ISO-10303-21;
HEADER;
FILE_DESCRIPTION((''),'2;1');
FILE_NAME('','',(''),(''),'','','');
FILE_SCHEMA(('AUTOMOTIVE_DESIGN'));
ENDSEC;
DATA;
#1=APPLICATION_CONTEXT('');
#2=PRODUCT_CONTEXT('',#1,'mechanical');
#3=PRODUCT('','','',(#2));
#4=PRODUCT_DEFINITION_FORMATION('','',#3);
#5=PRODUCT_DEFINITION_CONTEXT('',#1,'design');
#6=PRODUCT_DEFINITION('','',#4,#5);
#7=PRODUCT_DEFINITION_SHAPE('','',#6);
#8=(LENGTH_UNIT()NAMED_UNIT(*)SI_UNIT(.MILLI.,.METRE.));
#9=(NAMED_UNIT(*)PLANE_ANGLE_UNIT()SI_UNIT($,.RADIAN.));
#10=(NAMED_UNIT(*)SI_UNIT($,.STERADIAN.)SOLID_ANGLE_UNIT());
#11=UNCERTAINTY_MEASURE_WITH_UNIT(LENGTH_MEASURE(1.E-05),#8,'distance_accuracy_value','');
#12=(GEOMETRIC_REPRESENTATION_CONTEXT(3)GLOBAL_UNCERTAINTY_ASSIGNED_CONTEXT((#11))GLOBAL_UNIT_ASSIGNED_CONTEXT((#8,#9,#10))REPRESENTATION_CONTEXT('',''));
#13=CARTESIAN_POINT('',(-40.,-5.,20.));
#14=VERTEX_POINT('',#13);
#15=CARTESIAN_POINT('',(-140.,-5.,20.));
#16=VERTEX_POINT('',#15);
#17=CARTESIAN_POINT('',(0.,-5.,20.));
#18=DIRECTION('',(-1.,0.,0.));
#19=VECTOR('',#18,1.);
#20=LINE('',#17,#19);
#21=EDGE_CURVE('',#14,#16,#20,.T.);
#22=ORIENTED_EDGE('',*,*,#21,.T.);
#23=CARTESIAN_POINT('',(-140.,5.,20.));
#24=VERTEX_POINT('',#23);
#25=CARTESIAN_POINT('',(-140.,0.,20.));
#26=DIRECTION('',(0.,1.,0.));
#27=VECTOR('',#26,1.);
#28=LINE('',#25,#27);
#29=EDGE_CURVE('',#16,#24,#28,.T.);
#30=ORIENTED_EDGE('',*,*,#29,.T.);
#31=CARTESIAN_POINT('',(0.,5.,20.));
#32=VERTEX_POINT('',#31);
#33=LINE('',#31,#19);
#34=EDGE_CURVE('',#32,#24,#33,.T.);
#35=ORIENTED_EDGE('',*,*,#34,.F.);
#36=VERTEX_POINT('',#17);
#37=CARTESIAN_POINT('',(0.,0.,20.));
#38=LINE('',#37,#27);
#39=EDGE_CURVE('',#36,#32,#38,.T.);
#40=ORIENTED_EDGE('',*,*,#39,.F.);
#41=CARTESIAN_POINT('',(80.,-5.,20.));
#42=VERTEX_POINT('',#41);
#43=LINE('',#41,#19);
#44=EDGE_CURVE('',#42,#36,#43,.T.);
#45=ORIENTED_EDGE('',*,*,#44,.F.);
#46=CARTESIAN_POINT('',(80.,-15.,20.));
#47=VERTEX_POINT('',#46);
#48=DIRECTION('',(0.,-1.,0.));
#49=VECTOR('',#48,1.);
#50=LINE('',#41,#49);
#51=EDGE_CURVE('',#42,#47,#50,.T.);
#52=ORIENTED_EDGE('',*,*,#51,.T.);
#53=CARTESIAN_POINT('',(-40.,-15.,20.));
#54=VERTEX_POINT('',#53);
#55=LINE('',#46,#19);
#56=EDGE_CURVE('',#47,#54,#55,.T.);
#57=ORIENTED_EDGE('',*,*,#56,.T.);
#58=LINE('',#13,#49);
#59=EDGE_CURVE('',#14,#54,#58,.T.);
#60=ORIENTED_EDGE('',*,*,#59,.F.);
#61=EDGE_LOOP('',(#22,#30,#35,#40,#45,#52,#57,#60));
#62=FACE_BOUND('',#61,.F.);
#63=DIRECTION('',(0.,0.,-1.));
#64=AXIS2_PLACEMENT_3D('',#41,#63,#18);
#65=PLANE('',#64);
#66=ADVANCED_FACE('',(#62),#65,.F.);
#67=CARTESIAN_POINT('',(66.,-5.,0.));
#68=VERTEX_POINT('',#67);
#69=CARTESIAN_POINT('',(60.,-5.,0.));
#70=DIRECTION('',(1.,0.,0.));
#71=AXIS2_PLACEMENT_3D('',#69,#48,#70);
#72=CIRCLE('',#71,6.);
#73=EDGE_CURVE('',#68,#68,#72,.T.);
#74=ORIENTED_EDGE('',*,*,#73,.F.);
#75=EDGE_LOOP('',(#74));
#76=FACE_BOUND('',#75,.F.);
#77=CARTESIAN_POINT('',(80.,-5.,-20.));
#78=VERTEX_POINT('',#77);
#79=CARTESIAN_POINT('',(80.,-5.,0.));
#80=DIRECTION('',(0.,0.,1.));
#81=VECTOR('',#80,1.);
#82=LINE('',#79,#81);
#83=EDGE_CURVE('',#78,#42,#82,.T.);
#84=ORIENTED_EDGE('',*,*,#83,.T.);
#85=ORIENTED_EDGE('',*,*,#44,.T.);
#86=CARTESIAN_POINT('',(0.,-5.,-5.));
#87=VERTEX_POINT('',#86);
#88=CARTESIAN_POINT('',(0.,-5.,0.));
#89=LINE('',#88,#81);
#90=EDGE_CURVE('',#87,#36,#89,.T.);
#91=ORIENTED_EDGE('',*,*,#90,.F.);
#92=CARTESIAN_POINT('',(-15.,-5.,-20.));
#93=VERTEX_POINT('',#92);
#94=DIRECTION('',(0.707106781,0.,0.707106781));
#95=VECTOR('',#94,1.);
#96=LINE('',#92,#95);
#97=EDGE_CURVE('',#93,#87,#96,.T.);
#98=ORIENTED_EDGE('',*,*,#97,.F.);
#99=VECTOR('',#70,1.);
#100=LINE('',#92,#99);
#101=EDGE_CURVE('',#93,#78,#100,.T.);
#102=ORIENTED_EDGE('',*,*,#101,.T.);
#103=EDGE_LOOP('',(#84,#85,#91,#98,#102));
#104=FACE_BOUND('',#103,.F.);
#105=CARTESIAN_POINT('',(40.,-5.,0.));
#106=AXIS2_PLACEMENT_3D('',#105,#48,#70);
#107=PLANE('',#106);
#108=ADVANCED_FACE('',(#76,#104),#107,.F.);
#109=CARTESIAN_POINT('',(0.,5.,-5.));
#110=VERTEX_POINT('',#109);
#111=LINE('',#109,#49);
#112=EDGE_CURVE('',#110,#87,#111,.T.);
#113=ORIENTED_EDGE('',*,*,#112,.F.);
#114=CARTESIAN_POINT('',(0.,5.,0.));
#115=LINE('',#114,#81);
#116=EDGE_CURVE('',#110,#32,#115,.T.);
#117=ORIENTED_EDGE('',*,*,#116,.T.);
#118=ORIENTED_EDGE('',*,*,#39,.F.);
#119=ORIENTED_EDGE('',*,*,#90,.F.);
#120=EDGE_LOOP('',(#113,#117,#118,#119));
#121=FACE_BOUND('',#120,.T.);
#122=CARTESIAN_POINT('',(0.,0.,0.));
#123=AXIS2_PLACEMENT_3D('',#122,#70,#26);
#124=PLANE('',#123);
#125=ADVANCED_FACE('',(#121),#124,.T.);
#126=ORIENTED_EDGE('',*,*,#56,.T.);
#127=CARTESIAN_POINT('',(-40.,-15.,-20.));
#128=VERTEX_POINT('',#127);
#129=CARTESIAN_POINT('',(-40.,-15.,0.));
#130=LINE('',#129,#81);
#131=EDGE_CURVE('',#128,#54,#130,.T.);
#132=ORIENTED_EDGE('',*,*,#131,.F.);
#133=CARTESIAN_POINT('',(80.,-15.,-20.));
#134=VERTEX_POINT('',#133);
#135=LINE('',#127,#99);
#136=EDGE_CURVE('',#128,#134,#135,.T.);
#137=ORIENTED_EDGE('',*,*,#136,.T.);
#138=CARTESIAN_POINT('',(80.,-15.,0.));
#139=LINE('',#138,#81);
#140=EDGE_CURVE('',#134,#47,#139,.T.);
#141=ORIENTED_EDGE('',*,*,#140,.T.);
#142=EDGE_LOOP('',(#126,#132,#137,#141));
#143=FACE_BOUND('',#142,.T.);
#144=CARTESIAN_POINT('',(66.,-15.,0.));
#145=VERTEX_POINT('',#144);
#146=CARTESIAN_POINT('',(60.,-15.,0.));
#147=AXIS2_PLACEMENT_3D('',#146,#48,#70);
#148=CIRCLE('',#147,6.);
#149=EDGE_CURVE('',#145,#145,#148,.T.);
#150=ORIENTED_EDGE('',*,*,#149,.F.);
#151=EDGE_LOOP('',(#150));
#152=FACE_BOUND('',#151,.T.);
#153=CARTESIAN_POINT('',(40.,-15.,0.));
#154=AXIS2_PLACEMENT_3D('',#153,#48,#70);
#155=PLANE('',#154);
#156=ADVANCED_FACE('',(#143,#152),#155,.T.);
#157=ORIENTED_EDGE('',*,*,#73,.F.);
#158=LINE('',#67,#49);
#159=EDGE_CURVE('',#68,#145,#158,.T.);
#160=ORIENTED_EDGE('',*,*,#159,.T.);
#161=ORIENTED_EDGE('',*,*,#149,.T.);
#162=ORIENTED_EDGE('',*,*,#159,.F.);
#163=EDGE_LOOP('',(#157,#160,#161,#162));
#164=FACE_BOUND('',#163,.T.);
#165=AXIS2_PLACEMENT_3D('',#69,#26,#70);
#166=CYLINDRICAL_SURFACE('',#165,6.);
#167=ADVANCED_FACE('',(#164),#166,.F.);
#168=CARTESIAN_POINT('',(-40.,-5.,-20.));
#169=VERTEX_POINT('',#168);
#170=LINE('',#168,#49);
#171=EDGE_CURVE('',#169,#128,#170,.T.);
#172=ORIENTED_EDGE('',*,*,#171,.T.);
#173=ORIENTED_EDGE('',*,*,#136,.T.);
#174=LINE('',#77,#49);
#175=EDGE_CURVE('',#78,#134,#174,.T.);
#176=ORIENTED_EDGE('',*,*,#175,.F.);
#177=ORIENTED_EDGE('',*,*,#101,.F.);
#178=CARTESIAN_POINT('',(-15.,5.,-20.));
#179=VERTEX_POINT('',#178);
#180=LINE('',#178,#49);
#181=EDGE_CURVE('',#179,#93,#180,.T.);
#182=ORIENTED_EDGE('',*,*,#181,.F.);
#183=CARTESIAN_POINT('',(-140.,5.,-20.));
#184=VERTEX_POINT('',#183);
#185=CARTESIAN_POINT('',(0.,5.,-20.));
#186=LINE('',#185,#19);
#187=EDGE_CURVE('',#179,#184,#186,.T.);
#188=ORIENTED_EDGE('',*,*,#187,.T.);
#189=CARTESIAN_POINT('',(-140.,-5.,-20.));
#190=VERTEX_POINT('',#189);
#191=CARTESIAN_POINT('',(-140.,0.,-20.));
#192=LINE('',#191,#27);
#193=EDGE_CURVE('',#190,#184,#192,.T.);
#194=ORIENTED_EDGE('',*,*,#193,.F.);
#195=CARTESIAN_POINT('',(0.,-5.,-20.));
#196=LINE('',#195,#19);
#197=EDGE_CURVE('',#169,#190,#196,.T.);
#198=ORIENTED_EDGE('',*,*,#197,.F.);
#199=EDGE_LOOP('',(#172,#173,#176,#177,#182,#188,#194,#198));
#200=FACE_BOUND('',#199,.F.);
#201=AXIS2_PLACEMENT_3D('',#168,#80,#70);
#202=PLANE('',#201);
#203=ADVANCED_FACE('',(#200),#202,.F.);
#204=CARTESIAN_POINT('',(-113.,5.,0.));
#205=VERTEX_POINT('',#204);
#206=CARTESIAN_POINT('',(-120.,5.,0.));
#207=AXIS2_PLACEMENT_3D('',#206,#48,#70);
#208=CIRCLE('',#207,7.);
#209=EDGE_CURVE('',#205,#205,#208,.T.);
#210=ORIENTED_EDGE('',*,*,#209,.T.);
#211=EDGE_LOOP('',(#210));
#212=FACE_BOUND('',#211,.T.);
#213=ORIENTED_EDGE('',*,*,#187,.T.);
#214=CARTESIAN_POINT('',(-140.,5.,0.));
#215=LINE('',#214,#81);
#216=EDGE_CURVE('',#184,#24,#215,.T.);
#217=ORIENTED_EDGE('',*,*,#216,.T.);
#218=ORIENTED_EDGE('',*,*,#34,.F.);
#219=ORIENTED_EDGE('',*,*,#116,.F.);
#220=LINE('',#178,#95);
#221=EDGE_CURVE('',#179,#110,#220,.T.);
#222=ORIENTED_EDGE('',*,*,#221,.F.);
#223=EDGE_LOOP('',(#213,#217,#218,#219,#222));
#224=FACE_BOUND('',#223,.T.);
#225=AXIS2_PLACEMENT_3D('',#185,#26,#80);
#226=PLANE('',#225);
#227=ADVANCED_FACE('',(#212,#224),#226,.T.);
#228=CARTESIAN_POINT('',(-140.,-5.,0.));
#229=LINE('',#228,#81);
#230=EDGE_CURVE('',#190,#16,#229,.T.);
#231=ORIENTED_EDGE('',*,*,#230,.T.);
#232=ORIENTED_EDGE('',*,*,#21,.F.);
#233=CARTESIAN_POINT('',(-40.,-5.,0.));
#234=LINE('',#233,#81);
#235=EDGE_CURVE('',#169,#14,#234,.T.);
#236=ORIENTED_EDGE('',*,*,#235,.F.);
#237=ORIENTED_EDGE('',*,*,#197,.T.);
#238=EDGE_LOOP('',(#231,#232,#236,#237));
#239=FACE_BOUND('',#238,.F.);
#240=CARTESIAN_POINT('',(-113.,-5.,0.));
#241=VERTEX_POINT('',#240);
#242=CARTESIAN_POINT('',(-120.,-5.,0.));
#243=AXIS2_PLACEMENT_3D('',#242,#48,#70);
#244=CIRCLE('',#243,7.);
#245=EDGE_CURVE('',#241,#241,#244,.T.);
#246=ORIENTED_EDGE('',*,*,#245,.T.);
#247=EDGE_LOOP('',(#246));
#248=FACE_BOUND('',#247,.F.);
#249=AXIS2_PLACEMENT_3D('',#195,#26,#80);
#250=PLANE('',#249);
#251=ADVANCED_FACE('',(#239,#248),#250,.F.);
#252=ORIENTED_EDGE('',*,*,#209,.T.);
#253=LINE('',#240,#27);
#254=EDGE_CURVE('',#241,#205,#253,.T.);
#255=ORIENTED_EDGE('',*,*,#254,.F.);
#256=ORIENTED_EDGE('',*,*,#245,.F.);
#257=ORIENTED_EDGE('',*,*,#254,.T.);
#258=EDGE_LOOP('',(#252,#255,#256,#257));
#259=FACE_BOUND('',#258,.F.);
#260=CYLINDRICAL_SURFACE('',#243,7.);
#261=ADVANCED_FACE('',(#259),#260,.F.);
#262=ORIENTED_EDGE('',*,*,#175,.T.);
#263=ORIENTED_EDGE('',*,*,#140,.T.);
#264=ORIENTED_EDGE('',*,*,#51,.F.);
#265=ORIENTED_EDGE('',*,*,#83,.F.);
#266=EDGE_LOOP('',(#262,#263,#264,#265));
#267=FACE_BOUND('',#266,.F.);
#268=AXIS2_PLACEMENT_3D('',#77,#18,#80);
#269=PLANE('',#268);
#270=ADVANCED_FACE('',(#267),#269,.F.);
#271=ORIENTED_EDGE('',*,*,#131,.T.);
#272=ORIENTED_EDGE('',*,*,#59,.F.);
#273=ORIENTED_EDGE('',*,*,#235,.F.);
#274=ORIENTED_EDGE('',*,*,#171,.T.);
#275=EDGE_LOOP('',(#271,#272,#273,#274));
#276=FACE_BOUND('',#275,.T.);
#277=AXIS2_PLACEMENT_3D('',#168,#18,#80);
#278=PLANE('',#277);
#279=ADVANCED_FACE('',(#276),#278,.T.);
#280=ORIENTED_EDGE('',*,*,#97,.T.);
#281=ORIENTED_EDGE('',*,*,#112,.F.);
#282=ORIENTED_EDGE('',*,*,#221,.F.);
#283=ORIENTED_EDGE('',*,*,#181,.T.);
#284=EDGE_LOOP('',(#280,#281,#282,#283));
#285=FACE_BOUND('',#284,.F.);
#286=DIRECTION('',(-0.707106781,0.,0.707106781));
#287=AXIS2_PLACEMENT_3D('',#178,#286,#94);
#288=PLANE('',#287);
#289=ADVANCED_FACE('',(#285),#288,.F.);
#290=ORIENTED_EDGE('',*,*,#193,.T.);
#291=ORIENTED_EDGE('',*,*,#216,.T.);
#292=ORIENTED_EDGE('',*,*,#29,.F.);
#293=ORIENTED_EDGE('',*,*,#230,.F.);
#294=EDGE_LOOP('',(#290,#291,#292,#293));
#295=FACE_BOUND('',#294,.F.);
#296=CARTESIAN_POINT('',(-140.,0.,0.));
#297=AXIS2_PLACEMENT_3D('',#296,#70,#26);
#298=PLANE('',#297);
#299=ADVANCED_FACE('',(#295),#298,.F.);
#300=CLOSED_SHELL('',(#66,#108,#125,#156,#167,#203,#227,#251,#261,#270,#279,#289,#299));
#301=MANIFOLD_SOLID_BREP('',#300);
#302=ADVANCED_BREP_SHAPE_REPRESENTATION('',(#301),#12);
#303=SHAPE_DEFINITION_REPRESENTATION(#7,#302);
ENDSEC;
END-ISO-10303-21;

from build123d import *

# Parameters (mm, degrees)
F0_W     = 10
F0_H     = 40
F1_DEPTH = 140
F2_R     = 7
F3_DEPTH = 10.001
F4_W     = 80
F4_H     = 40
F4_R     = 6
F4_W_2   = 40
F5_DEPTH = 10
F7_DEPTH = 10


# Not quite as in the source:
# - a feature names something its author has since deleted; it is built from what else it names


with BuildPart() as f1:
    # F0 (on Right) → F1 (new body)
    with BuildSketch(Plane.YZ):
        Rectangle(F0_W, F0_H)
    extrude(amount=-F1_DEPTH)

    # F2 (on face) → F3 (cut, through all)
    with BuildSketch(Plane.XZ.offset(5)):
        with Locations((-120, 0)):
            Circle(F2_R)
    extrude(amount=-F3_DEPTH, mode=Mode.SUBTRACT)

    # F4 (on face) → F5 (join)
    with BuildSketch(Plane.XZ.offset(5)):
        with Locations((40, 0)):
            Rectangle(F4_W, F4_H)
        with Locations((60, 0)):
            Circle(F4_R, mode=Mode.SUBTRACT)
        with Locations((-20, 0)):
            Rectangle(F4_W_2, F4_H)
    extrude(amount=F5_DEPTH)

    # F6 (on face) → F7 (cut, through all)
    with BuildSketch(Plane(origin=(0, 5, 0), x_dir=(-1, 0, 0), z_dir=(0, 1, 0))):
        Polygon((15, -20), (0, -5), (0, -20), align=None)
    extrude(amount=-F7_DEPTH, mode=Mode.SUBTRACT)


solid = f1.part
